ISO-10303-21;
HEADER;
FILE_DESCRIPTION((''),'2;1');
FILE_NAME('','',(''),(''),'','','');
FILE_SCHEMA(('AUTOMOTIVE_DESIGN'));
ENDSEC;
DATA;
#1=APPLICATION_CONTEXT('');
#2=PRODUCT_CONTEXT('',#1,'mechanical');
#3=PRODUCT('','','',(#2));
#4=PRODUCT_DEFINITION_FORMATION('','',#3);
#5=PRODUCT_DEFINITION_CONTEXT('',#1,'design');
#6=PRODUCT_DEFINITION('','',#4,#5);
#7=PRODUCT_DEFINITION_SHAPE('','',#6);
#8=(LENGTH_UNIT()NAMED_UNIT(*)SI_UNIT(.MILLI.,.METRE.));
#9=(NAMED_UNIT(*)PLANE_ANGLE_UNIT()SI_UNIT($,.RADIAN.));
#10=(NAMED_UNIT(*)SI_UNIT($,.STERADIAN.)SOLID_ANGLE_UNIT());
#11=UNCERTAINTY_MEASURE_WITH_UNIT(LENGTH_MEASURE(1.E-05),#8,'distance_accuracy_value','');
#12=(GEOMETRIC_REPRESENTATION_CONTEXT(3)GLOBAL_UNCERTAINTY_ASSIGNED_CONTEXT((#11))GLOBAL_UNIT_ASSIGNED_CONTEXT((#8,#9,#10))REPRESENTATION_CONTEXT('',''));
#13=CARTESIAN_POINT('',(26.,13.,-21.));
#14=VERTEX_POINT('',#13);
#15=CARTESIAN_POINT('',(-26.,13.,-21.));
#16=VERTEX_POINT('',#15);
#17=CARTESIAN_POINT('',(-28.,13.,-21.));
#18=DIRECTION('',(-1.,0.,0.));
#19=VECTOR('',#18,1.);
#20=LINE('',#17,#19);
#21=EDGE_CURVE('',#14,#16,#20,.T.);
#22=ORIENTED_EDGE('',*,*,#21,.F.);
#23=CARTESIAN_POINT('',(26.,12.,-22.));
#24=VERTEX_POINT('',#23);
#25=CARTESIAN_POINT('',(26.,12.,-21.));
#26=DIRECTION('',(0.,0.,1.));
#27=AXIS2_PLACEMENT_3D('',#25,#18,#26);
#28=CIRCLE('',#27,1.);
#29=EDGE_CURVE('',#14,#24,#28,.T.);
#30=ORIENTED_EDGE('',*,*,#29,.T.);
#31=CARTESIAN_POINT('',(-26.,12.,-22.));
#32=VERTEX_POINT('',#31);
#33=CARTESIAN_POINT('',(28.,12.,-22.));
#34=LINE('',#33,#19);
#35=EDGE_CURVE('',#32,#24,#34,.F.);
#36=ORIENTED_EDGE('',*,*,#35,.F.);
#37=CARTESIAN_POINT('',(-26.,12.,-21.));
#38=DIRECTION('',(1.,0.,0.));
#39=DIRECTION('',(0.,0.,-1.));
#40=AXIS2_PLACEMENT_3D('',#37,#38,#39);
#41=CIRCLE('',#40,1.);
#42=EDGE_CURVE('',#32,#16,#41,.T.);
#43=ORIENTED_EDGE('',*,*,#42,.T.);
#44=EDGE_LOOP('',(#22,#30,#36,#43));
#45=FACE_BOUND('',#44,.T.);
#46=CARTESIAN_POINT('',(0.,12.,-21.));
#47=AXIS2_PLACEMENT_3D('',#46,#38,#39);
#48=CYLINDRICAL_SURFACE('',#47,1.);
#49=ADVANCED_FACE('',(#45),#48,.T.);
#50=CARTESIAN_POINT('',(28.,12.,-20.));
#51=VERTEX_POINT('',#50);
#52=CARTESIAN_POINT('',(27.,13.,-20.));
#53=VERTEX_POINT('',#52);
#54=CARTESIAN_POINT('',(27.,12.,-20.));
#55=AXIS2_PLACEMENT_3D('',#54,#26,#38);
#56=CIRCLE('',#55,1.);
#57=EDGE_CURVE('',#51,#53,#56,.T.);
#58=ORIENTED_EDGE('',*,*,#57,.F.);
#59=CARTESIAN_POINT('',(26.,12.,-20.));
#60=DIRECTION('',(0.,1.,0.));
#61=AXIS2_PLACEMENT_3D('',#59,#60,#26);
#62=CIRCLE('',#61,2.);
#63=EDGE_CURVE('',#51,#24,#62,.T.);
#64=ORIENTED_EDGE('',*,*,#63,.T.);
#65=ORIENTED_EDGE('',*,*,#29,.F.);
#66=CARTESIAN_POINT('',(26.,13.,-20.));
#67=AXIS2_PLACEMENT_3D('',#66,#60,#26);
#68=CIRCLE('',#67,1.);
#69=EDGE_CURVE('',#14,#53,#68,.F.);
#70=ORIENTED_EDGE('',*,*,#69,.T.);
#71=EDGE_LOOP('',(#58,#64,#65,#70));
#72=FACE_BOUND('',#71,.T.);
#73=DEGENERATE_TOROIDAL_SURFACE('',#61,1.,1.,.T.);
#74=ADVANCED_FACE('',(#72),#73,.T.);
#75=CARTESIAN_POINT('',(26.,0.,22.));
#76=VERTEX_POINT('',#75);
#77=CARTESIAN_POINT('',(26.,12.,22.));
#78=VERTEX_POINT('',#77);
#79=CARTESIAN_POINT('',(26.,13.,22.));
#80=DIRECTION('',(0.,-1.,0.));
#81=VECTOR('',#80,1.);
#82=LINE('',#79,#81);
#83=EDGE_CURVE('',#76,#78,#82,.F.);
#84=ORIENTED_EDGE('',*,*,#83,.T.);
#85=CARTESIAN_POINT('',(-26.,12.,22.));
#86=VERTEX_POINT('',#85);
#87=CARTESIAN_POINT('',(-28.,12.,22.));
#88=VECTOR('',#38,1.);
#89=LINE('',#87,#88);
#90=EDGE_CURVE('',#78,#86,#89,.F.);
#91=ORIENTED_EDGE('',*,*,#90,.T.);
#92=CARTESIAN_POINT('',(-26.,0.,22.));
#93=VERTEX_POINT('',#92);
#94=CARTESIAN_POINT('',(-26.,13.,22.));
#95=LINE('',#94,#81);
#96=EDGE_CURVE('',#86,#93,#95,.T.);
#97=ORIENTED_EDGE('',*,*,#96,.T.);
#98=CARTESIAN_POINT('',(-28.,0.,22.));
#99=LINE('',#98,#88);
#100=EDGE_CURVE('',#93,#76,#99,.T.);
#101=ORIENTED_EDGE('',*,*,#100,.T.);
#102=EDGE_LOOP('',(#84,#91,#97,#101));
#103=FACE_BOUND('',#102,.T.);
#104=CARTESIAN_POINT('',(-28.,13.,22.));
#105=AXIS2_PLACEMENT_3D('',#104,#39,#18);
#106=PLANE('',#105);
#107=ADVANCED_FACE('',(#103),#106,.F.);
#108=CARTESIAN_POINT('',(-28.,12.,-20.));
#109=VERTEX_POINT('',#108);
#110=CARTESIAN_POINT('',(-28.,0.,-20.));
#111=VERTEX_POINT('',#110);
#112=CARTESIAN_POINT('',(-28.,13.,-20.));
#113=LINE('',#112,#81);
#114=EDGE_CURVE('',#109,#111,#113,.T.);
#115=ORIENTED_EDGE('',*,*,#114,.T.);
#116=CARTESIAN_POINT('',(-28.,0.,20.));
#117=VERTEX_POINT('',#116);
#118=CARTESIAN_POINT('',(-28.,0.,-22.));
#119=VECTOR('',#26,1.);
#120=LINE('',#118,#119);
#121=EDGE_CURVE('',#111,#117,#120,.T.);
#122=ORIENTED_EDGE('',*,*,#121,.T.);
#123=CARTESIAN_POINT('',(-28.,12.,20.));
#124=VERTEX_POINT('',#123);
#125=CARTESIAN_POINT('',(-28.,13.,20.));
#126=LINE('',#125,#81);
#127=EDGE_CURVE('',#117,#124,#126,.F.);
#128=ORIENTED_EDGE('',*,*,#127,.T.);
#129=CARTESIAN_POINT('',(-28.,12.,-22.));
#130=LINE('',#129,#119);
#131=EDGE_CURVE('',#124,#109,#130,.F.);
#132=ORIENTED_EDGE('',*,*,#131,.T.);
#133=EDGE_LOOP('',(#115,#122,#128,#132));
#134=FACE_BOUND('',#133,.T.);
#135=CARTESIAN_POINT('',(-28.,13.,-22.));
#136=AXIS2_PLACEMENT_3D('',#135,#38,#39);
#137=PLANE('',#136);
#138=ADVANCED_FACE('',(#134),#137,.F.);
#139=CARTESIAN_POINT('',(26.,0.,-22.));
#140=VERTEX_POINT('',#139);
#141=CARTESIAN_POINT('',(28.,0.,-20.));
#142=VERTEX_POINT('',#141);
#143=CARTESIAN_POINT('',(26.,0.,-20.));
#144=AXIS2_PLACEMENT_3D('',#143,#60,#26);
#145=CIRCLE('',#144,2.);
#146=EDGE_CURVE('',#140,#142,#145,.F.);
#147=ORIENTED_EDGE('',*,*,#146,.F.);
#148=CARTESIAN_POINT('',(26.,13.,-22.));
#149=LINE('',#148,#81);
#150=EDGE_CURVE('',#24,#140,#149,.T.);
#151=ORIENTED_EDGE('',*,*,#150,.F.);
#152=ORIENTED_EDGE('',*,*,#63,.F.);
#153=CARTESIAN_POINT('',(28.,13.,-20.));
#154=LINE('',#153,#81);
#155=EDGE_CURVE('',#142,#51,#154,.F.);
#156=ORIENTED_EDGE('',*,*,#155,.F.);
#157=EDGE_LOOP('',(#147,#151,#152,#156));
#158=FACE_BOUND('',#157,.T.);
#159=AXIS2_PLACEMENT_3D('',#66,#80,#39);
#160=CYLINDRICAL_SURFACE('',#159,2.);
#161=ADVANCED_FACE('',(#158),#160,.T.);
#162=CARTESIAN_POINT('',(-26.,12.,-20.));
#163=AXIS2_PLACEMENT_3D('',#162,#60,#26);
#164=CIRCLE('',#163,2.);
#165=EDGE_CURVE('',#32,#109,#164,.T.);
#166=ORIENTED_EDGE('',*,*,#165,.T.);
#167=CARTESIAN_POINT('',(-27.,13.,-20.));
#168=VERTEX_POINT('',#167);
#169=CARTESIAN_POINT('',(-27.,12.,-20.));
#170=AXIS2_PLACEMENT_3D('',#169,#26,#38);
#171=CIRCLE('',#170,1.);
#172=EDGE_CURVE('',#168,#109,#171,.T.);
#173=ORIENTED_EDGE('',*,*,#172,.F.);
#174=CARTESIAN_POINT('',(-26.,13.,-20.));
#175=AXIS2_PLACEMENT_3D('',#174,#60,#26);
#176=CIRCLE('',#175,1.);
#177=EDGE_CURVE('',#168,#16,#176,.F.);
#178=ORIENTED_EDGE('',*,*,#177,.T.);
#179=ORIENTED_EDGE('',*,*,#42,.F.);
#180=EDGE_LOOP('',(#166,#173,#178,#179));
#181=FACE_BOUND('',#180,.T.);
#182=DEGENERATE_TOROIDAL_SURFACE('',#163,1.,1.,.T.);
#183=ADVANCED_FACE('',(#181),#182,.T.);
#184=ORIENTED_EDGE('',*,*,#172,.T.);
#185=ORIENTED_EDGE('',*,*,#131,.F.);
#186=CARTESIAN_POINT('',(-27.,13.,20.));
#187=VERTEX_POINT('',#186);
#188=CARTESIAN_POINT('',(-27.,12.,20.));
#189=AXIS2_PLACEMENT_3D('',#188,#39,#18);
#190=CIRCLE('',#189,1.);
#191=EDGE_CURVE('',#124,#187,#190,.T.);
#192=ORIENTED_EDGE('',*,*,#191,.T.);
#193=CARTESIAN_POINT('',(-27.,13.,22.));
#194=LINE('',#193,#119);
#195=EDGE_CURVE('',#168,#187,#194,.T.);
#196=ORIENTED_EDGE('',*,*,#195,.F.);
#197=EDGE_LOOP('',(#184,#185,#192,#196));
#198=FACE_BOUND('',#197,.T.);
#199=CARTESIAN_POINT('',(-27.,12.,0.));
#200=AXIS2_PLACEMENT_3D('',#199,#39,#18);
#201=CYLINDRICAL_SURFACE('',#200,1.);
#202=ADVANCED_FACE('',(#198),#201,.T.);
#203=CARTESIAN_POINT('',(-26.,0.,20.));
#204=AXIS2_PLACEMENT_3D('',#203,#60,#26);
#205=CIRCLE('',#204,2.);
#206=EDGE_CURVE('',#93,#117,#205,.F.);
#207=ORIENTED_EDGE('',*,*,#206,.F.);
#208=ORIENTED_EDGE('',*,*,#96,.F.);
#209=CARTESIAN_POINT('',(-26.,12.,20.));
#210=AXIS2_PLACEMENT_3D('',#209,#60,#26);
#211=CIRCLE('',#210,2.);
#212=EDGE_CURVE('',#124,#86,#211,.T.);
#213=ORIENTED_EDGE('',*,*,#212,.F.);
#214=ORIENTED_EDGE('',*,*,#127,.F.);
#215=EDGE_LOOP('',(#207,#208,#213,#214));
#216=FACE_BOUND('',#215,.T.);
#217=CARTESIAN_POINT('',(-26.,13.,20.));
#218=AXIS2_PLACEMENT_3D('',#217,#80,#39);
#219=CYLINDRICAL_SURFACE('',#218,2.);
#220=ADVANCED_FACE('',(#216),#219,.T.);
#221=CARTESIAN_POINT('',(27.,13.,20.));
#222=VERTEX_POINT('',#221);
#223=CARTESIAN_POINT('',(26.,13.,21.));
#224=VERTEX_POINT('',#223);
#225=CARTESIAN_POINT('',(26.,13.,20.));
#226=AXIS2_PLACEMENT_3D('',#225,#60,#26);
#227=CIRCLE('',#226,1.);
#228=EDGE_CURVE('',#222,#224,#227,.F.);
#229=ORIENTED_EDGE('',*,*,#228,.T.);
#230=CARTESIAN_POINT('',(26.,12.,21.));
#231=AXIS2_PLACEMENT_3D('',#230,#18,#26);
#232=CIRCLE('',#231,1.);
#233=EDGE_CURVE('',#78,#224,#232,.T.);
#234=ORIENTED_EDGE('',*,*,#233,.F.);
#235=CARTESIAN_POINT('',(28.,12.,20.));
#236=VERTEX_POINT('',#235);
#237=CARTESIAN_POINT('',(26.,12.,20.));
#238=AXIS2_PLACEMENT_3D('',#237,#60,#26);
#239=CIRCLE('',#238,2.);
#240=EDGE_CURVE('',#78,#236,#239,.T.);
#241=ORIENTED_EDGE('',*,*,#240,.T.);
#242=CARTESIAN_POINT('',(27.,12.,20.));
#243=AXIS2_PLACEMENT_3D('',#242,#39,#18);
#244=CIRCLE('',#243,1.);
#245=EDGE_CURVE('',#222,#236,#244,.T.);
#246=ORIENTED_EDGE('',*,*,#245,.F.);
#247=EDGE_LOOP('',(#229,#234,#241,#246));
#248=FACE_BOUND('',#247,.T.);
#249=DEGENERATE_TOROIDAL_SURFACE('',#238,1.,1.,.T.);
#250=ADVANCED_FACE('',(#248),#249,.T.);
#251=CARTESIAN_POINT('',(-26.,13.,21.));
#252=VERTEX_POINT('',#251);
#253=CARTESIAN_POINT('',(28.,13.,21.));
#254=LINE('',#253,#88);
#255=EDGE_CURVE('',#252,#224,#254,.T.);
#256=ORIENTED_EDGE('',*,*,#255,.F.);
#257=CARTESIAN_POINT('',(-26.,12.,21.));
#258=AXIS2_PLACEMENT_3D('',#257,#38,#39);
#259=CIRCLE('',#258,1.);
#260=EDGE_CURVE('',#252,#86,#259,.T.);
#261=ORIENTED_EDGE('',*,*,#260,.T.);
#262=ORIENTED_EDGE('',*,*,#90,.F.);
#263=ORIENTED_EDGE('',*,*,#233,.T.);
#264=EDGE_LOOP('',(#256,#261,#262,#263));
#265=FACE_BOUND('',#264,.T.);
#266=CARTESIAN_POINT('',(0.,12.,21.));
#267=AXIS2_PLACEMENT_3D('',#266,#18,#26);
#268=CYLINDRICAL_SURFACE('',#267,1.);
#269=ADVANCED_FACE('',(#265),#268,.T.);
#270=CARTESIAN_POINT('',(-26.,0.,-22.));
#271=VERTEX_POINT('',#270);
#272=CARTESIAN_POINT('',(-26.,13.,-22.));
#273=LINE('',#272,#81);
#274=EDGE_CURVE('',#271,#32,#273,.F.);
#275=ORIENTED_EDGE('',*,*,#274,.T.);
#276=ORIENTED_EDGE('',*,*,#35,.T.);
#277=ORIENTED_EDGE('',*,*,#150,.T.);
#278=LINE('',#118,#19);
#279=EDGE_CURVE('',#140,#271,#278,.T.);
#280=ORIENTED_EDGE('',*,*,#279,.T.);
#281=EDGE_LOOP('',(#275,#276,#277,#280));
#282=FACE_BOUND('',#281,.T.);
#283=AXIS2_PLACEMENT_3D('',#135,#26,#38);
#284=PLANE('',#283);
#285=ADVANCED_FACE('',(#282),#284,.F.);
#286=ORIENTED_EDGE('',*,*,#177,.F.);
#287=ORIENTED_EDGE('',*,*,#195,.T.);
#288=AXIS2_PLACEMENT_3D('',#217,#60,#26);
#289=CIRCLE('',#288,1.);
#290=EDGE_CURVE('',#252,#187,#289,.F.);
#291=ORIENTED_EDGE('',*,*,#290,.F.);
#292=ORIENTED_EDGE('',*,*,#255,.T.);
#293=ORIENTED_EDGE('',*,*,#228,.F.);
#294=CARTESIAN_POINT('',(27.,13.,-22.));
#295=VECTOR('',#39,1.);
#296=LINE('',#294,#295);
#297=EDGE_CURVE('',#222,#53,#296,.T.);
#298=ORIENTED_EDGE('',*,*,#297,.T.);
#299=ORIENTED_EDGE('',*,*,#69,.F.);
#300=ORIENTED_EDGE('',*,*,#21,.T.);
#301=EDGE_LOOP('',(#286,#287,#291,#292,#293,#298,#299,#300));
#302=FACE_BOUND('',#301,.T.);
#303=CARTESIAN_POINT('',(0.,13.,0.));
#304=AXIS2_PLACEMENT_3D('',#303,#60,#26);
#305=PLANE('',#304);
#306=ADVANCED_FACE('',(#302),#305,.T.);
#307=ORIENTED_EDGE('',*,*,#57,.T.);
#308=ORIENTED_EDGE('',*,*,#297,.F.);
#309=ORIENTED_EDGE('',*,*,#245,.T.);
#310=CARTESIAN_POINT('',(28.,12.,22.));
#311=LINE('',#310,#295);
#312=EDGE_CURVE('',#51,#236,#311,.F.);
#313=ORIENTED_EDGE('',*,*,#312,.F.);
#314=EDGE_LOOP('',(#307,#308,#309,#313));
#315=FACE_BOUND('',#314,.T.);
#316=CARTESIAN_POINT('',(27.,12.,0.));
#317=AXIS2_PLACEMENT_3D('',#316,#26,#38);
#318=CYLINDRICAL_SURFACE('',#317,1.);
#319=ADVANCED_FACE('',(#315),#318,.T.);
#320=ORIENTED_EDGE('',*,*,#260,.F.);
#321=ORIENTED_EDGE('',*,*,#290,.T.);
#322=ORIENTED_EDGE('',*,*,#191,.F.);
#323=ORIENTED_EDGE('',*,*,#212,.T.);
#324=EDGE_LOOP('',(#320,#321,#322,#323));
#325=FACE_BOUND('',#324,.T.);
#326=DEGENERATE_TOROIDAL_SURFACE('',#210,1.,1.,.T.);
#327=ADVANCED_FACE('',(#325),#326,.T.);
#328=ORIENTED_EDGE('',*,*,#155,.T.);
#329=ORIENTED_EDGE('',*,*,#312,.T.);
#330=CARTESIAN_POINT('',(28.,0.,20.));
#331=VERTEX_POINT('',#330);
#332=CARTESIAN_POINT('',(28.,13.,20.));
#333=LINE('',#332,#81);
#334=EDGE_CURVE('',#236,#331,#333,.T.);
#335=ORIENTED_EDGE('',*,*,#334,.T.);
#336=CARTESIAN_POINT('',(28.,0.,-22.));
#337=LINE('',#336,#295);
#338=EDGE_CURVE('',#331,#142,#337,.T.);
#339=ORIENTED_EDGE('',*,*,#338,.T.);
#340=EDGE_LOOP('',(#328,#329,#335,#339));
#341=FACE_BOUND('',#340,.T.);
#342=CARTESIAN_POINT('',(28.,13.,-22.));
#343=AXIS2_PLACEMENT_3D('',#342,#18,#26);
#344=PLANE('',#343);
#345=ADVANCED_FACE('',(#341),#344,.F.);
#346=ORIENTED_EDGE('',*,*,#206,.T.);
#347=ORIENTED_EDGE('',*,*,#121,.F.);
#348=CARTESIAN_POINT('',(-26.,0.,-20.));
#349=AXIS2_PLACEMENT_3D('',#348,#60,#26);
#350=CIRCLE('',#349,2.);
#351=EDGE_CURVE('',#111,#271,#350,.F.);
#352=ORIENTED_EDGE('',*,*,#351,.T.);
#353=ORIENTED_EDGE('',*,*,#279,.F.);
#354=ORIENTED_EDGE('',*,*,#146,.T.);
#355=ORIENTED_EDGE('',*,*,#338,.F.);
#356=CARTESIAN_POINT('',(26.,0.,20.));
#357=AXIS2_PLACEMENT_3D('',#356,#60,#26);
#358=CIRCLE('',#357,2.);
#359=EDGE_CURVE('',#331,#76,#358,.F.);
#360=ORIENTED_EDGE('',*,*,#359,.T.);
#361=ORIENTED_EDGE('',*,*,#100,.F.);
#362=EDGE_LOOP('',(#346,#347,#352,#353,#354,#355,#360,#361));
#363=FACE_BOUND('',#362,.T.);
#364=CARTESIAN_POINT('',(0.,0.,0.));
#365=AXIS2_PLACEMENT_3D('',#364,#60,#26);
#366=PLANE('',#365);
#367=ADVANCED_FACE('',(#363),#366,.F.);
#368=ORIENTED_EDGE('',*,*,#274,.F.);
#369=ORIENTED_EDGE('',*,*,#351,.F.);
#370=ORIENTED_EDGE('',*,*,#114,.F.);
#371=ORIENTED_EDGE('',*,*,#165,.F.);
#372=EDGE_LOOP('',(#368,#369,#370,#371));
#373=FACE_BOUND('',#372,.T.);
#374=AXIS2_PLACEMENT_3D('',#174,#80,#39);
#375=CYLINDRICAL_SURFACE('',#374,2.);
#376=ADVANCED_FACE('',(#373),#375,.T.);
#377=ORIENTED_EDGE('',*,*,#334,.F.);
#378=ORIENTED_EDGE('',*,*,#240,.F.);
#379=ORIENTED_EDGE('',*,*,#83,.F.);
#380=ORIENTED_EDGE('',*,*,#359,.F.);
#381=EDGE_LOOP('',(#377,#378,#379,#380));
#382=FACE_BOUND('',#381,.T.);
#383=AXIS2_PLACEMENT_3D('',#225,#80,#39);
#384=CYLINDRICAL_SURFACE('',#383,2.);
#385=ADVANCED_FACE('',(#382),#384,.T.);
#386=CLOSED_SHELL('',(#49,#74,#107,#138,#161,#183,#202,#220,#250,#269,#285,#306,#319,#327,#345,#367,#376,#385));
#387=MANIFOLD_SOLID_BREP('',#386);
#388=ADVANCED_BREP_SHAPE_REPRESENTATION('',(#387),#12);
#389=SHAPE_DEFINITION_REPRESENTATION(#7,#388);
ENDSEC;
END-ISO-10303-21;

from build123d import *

# Parameters (mm, degrees)
SKETCH1_W           = 56
SKETCH1_H           = 44
BOSS_EXTRUDE1_DEPTH = 13
FILLET1_R           = 1
FILLET2_R           = 2


with BuildPart() as part:
    # Sketch1 → Boss-Extrude1 (new body)
    with BuildSketch(Plane(origin=(0, 0, 0), x_dir=(1, 0, 0), z_dir=(0, 1, 0))):
        Rectangle(SKETCH1_W, SKETCH1_H)
    extrude(amount=BOSS_EXTRUDE1_DEPTH)

    # Fillet1
    fillet1_edges = [part.edges().sort_by_distance(p)[0] for p in [
        (28, 13, 0),
        (0, 13, -22),
        (-28, 13, 0),
        (0, 13, 22),
    ]]
    fillet(fillet1_edges, radius=FILLET1_R)

    # Fillet2
    # the kernel refuses this fillet: 2 mm, written as the material it takes off along each edge
    with BuildSketch(Plane(origin=(26, 13, 20), x_dir=(0, 0, 1), z_dir=(-1, 0, 0))) as fillet2_piece_1:
        with BuildLine():
            CenterArc((1, -1), 1, 0, 90)
            Line((2, -1), (2, 0))
            Line((2, 0), (1, 0))
        make_face()
    revolve(axis=Axis((26, 13, 20), (0, 1, 0)), revolution_arc=90, mode=Mode.SUBTRACT)
    with BuildSketch(Plane(origin=(-26, 13, 20), x_dir=(-1, 0, 0), z_dir=(0, 0, -1))) as fillet2_piece_2:
        with BuildLine():
            CenterArc((1, -1), 1, 0, 90)
            Line((2, -1), (2, 0))
            Line((2, 0), (1, 0))
        make_face()
    revolve(axis=Axis((-26, 13, 20), (0, 1, 0)), revolution_arc=90, mode=Mode.SUBTRACT)
    with BuildSketch(Plane(origin=(26, 13, -20), x_dir=(1, 0, 0), z_dir=(0, 0, 1))) as fillet2_piece_3:
        with BuildLine():
            CenterArc((1, -1), 1, 0, 90)
            Line((2, -1), (2, 0))
            Line((2, 0), (1, 0))
        make_face()
    revolve(axis=Axis((26, 13, -20), (0, 1, 0)), revolution_arc=90, mode=Mode.SUBTRACT)
    with BuildSketch(Plane(origin=(-26, 13, -20), x_dir=(0, 0, -1), z_dir=(1, 0, 0))) as fillet2_piece_4:
        with BuildLine():
            CenterArc((1, -1), 1, 0, 90)
            Line((2, -1), (2, 0))
            Line((2, 0), (1, 0))
        make_face()
    revolve(axis=Axis((-26, 13, -20), (0, 1, 0)), revolution_arc=90, mode=Mode.SUBTRACT)
    with BuildSketch(Plane(origin=(-28, -5, -22), x_dir=(1, 0, 0), z_dir=(0, 1, 0)), Plane(origin=(-28, -5, 22), x_dir=(0, 0, -1), z_dir=(0, 1, 0))) as fillet2_piece_5:
        with BuildLine():
            CenterArc((FILLET2_R, -FILLET2_R), FILLET2_R, 90, 90)
            Line((0, -FILLET2_R), (0, 0))
            Line((0, 0), (FILLET2_R, 0))
        make_face()
    extrude(amount=18, mode=Mode.SUBTRACT)
    with BuildSketch(Plane(origin=(28, -5, -22), x_dir=(-1, 0, 0), z_dir=(0, 1, 0)), Plane(origin=(28, -5, 22), x_dir=(0, 0, -1), z_dir=(0, 1, 0))) as fillet2_piece_6:
        with BuildLine():
            CenterArc((FILLET2_R, FILLET2_R), FILLET2_R, 180, 90)
            Line((0, FILLET2_R), (0, 0))
            Line((0, 0), (FILLET2_R, 0))
        make_face()
    extrude(amount=18, mode=Mode.SUBTRACT)


solid = part.part
